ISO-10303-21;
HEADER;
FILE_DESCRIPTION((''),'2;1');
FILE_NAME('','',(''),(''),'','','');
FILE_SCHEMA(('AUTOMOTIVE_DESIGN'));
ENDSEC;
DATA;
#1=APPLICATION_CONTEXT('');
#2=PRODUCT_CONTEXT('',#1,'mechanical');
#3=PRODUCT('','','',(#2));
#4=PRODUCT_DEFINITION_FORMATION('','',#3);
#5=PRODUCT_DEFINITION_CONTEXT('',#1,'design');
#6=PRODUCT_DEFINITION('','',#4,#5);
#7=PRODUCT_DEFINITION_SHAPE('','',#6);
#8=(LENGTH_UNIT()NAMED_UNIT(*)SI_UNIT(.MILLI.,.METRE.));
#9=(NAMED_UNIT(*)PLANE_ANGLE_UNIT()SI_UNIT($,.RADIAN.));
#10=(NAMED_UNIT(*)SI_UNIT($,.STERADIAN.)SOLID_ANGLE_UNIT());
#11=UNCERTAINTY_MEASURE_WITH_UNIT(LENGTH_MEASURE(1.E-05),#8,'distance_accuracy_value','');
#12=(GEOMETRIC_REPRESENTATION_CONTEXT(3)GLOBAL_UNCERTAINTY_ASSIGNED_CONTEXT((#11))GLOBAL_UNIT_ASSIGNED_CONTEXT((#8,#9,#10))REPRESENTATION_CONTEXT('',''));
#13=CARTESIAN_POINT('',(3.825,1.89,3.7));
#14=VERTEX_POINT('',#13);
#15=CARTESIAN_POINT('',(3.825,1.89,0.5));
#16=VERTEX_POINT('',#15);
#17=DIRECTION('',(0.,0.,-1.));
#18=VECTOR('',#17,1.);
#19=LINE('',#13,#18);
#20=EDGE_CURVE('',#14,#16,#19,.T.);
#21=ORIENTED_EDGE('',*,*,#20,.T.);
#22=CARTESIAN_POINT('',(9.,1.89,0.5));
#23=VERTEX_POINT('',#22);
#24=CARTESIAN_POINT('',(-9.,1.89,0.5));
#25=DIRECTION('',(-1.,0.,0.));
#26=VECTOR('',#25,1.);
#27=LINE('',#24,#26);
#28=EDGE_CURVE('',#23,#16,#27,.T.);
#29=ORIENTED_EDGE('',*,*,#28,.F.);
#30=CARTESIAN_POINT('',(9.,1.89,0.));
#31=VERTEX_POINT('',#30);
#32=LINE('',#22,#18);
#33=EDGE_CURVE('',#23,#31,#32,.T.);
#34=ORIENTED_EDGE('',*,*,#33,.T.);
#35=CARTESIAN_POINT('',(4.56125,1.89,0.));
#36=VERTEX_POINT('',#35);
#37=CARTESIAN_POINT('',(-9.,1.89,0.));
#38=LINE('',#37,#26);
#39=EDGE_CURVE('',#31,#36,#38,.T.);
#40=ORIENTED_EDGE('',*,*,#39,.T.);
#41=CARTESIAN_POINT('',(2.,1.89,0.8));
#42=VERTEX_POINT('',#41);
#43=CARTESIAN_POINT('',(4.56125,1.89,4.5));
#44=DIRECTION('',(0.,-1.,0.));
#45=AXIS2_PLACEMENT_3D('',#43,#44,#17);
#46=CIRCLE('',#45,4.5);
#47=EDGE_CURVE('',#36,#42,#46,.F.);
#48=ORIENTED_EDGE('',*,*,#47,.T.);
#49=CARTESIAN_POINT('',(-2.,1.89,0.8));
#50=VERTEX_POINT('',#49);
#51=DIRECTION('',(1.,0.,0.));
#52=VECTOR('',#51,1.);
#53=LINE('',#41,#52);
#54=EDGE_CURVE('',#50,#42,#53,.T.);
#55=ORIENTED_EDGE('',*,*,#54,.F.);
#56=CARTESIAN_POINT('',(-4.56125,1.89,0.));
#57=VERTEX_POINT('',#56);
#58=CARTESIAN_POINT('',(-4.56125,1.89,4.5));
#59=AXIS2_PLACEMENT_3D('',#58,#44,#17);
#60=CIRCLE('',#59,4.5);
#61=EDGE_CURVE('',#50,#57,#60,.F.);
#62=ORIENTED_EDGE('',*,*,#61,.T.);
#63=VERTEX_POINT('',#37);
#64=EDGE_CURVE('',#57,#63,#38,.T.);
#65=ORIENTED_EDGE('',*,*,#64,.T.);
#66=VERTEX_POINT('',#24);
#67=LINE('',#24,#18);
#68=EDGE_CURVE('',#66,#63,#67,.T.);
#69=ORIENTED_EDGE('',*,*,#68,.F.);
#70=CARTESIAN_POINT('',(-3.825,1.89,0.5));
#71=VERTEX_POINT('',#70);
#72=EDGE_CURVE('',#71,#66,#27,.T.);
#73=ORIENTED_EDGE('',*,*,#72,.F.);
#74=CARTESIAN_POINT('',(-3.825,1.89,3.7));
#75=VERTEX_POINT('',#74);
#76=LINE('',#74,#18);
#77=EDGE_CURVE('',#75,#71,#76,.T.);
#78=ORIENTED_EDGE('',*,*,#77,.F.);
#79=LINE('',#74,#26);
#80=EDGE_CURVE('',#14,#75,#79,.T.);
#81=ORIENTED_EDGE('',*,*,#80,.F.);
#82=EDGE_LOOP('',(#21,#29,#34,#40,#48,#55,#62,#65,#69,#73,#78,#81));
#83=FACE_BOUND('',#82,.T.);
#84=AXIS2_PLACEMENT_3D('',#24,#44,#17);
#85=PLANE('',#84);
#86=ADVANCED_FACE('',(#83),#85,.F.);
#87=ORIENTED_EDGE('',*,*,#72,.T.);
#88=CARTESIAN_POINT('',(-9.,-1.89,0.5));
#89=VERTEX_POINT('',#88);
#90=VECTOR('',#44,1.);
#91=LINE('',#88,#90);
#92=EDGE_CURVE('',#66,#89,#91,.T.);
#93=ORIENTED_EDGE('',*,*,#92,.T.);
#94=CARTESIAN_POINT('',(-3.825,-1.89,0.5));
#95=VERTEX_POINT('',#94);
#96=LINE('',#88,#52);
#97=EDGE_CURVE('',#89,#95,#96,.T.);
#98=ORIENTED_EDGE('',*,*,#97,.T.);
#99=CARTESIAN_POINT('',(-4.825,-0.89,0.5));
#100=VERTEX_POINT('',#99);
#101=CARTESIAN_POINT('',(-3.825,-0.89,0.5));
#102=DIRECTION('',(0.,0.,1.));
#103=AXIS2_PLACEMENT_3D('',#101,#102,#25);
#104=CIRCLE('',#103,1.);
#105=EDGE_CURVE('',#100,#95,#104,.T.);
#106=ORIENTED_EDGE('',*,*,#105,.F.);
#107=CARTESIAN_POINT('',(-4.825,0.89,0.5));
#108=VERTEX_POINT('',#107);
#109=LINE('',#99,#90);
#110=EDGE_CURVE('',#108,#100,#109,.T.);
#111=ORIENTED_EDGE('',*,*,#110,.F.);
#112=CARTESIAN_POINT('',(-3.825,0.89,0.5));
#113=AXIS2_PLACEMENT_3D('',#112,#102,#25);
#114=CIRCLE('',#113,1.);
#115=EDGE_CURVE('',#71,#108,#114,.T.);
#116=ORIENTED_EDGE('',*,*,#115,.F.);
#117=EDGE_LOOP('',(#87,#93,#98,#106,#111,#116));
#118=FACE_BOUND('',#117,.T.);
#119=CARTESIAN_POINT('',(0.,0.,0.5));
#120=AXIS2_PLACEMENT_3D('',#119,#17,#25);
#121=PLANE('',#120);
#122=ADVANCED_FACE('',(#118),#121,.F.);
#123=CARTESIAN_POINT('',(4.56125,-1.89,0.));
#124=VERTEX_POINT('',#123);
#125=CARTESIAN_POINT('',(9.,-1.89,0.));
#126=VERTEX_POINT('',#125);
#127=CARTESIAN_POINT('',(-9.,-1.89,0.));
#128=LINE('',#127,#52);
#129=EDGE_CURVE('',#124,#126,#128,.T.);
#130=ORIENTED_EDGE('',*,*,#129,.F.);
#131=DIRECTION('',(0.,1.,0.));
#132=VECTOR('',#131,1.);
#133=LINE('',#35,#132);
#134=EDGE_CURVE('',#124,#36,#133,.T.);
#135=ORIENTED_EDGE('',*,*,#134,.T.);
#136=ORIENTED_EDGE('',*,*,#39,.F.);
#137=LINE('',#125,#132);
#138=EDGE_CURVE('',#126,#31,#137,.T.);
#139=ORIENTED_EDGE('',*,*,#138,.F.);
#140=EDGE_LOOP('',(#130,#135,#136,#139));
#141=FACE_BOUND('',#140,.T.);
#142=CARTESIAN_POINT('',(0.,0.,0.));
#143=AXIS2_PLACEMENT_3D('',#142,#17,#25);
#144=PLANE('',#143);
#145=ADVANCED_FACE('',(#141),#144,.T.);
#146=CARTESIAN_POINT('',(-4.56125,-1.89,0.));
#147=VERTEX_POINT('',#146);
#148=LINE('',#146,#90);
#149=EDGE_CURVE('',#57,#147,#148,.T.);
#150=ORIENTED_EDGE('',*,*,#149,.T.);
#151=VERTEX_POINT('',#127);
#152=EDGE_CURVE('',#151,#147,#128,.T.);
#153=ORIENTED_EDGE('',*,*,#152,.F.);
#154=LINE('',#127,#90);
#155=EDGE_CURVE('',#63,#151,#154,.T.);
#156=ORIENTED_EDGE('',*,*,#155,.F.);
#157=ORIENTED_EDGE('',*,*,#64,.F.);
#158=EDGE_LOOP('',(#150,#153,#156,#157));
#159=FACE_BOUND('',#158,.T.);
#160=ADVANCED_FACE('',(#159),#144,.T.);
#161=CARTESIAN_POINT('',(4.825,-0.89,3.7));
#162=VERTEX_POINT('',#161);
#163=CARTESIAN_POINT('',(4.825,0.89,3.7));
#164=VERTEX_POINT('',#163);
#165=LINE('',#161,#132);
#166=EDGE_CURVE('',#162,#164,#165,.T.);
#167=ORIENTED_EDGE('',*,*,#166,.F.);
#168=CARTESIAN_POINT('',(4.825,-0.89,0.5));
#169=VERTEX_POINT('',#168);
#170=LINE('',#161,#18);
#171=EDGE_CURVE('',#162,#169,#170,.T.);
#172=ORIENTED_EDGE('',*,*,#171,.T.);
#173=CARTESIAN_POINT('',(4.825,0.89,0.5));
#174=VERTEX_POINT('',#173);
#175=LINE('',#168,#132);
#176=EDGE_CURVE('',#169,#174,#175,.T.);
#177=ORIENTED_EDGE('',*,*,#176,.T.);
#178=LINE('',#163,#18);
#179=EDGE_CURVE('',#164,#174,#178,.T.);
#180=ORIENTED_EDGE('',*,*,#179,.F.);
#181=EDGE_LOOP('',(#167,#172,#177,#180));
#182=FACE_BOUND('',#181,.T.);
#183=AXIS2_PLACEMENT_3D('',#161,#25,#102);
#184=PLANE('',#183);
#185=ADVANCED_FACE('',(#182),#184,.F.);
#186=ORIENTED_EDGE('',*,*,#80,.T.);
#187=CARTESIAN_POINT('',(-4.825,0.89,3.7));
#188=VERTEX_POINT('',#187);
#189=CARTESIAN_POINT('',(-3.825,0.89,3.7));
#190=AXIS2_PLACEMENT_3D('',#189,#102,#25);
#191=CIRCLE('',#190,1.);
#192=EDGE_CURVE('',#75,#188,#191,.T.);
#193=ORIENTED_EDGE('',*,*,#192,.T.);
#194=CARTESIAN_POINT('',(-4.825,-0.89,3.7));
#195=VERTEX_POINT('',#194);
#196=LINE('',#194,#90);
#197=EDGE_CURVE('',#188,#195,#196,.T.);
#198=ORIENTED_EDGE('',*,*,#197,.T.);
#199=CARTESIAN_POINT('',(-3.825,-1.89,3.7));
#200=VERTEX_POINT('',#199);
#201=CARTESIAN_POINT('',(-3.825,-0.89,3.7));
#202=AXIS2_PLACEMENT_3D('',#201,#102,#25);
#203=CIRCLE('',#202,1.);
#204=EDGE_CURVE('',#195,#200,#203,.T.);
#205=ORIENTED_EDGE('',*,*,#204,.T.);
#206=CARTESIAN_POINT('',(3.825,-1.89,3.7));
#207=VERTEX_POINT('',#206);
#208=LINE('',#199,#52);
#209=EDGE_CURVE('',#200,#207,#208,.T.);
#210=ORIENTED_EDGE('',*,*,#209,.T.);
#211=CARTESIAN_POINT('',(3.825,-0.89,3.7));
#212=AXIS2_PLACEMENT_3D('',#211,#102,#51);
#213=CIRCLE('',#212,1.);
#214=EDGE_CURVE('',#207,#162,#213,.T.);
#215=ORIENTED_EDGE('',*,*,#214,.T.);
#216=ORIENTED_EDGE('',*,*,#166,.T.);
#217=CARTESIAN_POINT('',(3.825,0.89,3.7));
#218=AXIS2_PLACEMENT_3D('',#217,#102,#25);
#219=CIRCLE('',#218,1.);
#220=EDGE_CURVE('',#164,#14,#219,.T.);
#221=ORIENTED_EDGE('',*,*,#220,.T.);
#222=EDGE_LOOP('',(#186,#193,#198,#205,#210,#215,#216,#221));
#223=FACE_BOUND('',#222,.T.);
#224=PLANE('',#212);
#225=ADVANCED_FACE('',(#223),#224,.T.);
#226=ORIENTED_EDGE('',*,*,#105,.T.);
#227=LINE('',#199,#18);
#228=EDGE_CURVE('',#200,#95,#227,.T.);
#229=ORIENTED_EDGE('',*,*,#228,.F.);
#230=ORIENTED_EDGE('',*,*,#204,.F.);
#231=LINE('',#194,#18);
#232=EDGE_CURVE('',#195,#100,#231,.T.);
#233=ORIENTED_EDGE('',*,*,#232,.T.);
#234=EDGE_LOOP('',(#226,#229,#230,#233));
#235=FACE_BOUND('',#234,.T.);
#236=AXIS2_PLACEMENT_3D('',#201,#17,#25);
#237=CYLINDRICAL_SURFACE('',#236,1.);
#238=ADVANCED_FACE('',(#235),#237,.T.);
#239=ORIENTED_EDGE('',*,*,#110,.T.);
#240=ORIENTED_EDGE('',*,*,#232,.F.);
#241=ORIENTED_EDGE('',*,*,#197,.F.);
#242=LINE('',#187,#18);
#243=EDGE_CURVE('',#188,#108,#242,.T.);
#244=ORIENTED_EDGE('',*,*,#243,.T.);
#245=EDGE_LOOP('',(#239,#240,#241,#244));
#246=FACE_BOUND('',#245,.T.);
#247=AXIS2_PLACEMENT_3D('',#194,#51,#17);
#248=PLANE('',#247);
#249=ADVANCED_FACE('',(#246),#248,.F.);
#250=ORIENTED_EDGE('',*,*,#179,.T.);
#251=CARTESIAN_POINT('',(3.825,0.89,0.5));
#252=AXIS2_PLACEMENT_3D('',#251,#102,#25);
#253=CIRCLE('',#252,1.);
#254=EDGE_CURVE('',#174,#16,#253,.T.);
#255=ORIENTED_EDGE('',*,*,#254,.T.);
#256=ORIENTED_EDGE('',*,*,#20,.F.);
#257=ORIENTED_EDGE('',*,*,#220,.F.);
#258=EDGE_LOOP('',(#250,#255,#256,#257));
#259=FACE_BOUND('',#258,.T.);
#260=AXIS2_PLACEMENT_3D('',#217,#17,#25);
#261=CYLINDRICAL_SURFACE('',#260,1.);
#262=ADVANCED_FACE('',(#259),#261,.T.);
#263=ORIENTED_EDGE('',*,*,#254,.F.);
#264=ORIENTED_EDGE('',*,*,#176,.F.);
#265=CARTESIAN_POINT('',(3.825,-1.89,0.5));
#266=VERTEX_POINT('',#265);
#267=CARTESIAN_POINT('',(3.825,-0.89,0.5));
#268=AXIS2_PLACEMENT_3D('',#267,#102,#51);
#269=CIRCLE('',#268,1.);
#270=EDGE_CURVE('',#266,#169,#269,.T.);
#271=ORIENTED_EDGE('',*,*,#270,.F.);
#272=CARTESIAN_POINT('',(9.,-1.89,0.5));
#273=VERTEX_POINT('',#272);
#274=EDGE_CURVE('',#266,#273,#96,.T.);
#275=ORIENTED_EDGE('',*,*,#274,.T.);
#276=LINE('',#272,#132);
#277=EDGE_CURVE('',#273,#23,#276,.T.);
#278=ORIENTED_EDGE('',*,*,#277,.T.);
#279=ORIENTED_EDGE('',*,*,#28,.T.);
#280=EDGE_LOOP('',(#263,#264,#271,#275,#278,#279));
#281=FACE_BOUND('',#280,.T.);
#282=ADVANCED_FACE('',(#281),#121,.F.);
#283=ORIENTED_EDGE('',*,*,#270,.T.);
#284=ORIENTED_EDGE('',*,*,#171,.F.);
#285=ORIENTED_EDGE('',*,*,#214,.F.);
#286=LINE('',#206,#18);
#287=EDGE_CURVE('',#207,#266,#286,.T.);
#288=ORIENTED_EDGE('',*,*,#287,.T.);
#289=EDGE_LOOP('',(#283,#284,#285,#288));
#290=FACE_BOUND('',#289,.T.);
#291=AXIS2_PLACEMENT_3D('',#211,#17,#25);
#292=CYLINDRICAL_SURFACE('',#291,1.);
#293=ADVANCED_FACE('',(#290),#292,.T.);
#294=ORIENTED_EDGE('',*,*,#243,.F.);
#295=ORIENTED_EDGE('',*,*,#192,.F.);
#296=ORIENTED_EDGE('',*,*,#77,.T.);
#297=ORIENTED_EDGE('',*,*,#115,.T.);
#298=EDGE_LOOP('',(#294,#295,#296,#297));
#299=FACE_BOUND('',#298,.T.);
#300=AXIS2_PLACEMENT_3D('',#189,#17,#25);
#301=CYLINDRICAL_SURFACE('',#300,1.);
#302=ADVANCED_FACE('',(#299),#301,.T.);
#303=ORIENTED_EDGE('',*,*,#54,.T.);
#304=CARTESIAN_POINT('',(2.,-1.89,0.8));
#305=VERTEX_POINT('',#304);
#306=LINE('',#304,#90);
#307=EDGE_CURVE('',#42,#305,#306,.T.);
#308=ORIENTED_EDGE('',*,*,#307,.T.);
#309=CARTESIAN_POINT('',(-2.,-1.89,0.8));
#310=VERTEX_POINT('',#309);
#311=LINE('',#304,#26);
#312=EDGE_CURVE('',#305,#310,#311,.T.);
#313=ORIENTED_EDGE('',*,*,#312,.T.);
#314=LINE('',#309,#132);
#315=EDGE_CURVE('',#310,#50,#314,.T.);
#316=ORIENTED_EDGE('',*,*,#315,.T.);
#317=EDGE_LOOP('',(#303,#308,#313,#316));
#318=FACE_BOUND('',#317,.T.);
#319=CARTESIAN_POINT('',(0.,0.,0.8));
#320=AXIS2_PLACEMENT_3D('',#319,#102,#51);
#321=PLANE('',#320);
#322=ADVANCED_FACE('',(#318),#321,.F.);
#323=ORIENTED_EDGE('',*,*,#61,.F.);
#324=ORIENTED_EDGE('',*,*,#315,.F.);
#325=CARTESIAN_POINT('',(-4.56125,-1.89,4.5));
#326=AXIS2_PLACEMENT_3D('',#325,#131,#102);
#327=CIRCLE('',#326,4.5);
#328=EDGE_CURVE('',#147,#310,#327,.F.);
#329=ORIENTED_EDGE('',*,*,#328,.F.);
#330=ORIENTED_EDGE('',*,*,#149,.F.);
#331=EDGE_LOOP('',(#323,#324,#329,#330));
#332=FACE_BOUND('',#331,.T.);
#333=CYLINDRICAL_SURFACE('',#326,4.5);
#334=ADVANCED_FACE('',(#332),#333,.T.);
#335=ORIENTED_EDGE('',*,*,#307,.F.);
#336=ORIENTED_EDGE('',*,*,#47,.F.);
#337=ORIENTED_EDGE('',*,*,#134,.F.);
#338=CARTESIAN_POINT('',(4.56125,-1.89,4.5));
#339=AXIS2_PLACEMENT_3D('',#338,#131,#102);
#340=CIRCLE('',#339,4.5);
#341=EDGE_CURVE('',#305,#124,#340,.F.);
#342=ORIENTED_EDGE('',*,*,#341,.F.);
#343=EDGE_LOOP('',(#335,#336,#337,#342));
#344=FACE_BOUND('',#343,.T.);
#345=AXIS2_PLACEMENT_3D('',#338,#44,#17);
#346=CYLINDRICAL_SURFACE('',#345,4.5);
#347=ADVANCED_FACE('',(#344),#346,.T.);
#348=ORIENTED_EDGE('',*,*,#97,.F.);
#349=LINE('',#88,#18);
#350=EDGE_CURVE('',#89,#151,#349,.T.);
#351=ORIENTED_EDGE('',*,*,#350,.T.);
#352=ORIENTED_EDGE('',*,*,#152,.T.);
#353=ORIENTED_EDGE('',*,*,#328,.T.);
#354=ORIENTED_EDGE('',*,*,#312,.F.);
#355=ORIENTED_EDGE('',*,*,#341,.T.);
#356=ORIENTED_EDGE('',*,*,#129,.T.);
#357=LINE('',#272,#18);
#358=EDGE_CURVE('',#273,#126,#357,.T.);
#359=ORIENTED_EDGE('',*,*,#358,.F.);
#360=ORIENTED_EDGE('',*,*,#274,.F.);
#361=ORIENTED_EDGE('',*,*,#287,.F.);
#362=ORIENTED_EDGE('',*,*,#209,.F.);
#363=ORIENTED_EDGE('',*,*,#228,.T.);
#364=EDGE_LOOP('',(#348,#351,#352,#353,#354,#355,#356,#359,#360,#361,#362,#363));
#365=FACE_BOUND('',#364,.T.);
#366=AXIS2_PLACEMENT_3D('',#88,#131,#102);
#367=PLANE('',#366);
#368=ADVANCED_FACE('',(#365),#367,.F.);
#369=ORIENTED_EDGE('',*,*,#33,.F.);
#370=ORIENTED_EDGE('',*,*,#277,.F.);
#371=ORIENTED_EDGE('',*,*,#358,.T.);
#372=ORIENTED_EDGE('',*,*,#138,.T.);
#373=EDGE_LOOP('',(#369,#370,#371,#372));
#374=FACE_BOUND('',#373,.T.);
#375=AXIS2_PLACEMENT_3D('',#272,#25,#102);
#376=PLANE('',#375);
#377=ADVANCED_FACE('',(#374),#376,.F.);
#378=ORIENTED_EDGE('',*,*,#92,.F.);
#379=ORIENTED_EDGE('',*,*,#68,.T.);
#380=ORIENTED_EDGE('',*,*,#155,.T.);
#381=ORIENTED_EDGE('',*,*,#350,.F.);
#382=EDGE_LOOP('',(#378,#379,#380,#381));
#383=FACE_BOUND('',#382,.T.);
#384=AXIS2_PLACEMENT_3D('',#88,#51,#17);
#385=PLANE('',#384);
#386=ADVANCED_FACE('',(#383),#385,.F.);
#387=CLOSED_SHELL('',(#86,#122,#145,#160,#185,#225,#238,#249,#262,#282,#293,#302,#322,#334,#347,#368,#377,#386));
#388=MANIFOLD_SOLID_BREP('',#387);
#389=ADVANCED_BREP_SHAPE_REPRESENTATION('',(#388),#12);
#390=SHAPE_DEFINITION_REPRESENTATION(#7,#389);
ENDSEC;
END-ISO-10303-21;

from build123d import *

# Parameters (mm, degrees)
SKETCH1_W           = 18
SKETCH1_H           = 3.78
BOSS_EXTRUDE1_DEPTH = 0.5
BOSS_EXTRUDE2_DEPTH = 3.2
SKETCH4_W           = 4
SKETCH4_H           = 3.78
CUT_EXTRUDE1_DEPTH  = 0.8
FILLET1_R           = 4.5


with BuildPart() as part:
    # Sketch1 → Boss-Extrude1 (new body)
    with BuildSketch(Plane.XY):
        Rectangle(SKETCH1_W, SKETCH1_H)
    extrude(amount=BOSS_EXTRUDE1_DEPTH)

    # Sketch3 → Boss-Extrude2 (add)
    with BuildSketch(Plane.XY.offset(0.5)):
        with BuildLine():
            Line((-3.825, -1.89), (3.825, -1.89))
            ThreePointArc((3.825, -1.89), (4.532106781, -1.597106781), (4.825, -0.89))
            Line((4.825, -0.89), (4.825, 0.89))
            ThreePointArc((4.825, 0.89), (4.532106781, 1.597106781), (3.825, 1.89))
            Line((3.825, 1.89), (-3.825, 1.89))
            ThreePointArc((-3.825, 1.89), (-4.532106781, 1.597106781), (-4.825, 0.89))
            Line((-4.825, 0.89), (-4.825, -0.89))
            ThreePointArc((-4.825, -0.89), (-4.532106781, -1.597106781), (-3.825, -1.89))
        make_face()
    extrude(amount=BOSS_EXTRUDE2_DEPTH)

    # Sketch4 → Cut-Extrude1 (cut)
    with BuildSketch(Plane(origin=(0, 0, 0), x_dir=(-1, 0, 0), z_dir=(0, 0, -1))):
        Rectangle(SKETCH4_W, SKETCH4_H)
    extrude(amount=-CUT_EXTRUDE1_DEPTH, mode=Mode.SUBTRACT)

    # Fillet1
    # the kernel refuses this fillet: 4.5 mm, written as the material it takes off along each edge
    with BuildSketch(Plane(origin=(-2, -8.293124237, 0), x_dir=(-1, 0, 0), z_dir=(0, 1, 0))) as fillet1_piece_1:
        with BuildLine():
            CenterArc((2.561249695, 4.5), FILLET1_R, 235.307869415, 34.692130585)
            Line((0, 0.8), (-0.051224994, 0.726))
            ThreePointArc((-0.051224994, 0.726), (-0.09, 0.4), (-0.09, 0))
            Line((-0.09, 0), (0, -0.09))
            Line((0, -0.09), (2.561249695, -0.09))
            Line((2.561249695, -0.09), (2.561249695, 0))
        make_face()
    extrude(amount=16.586248475, mode=Mode.SUBTRACT)
    with BuildSketch(Plane(origin=(2, 8.293124237, 0), x_dir=(1.0735856648108615e-12, 0, 1.0), z_dir=(0, -1, 0))) as fillet1_piece_2:
        with BuildLine():
            CenterArc((4.5, -2.561249695), FILLET1_R, 145.307869415, 34.692130585)
            Line((0, -2.561249695), (-0.09, -2.561249695))
            Line((-0.09, -2.561249695), (-0.09, 0))
            Line((-0.09, 0), (0, 0.09))
            ThreePointArc((0, 0.09), (0.4, 0.09), (0.726, 0.051224994))
            Line((0.726, 0.051224994), (0.8, 0))
        make_face()
    extrude(amount=16.586248475, mode=Mode.SUBTRACT)


solid = part.part
